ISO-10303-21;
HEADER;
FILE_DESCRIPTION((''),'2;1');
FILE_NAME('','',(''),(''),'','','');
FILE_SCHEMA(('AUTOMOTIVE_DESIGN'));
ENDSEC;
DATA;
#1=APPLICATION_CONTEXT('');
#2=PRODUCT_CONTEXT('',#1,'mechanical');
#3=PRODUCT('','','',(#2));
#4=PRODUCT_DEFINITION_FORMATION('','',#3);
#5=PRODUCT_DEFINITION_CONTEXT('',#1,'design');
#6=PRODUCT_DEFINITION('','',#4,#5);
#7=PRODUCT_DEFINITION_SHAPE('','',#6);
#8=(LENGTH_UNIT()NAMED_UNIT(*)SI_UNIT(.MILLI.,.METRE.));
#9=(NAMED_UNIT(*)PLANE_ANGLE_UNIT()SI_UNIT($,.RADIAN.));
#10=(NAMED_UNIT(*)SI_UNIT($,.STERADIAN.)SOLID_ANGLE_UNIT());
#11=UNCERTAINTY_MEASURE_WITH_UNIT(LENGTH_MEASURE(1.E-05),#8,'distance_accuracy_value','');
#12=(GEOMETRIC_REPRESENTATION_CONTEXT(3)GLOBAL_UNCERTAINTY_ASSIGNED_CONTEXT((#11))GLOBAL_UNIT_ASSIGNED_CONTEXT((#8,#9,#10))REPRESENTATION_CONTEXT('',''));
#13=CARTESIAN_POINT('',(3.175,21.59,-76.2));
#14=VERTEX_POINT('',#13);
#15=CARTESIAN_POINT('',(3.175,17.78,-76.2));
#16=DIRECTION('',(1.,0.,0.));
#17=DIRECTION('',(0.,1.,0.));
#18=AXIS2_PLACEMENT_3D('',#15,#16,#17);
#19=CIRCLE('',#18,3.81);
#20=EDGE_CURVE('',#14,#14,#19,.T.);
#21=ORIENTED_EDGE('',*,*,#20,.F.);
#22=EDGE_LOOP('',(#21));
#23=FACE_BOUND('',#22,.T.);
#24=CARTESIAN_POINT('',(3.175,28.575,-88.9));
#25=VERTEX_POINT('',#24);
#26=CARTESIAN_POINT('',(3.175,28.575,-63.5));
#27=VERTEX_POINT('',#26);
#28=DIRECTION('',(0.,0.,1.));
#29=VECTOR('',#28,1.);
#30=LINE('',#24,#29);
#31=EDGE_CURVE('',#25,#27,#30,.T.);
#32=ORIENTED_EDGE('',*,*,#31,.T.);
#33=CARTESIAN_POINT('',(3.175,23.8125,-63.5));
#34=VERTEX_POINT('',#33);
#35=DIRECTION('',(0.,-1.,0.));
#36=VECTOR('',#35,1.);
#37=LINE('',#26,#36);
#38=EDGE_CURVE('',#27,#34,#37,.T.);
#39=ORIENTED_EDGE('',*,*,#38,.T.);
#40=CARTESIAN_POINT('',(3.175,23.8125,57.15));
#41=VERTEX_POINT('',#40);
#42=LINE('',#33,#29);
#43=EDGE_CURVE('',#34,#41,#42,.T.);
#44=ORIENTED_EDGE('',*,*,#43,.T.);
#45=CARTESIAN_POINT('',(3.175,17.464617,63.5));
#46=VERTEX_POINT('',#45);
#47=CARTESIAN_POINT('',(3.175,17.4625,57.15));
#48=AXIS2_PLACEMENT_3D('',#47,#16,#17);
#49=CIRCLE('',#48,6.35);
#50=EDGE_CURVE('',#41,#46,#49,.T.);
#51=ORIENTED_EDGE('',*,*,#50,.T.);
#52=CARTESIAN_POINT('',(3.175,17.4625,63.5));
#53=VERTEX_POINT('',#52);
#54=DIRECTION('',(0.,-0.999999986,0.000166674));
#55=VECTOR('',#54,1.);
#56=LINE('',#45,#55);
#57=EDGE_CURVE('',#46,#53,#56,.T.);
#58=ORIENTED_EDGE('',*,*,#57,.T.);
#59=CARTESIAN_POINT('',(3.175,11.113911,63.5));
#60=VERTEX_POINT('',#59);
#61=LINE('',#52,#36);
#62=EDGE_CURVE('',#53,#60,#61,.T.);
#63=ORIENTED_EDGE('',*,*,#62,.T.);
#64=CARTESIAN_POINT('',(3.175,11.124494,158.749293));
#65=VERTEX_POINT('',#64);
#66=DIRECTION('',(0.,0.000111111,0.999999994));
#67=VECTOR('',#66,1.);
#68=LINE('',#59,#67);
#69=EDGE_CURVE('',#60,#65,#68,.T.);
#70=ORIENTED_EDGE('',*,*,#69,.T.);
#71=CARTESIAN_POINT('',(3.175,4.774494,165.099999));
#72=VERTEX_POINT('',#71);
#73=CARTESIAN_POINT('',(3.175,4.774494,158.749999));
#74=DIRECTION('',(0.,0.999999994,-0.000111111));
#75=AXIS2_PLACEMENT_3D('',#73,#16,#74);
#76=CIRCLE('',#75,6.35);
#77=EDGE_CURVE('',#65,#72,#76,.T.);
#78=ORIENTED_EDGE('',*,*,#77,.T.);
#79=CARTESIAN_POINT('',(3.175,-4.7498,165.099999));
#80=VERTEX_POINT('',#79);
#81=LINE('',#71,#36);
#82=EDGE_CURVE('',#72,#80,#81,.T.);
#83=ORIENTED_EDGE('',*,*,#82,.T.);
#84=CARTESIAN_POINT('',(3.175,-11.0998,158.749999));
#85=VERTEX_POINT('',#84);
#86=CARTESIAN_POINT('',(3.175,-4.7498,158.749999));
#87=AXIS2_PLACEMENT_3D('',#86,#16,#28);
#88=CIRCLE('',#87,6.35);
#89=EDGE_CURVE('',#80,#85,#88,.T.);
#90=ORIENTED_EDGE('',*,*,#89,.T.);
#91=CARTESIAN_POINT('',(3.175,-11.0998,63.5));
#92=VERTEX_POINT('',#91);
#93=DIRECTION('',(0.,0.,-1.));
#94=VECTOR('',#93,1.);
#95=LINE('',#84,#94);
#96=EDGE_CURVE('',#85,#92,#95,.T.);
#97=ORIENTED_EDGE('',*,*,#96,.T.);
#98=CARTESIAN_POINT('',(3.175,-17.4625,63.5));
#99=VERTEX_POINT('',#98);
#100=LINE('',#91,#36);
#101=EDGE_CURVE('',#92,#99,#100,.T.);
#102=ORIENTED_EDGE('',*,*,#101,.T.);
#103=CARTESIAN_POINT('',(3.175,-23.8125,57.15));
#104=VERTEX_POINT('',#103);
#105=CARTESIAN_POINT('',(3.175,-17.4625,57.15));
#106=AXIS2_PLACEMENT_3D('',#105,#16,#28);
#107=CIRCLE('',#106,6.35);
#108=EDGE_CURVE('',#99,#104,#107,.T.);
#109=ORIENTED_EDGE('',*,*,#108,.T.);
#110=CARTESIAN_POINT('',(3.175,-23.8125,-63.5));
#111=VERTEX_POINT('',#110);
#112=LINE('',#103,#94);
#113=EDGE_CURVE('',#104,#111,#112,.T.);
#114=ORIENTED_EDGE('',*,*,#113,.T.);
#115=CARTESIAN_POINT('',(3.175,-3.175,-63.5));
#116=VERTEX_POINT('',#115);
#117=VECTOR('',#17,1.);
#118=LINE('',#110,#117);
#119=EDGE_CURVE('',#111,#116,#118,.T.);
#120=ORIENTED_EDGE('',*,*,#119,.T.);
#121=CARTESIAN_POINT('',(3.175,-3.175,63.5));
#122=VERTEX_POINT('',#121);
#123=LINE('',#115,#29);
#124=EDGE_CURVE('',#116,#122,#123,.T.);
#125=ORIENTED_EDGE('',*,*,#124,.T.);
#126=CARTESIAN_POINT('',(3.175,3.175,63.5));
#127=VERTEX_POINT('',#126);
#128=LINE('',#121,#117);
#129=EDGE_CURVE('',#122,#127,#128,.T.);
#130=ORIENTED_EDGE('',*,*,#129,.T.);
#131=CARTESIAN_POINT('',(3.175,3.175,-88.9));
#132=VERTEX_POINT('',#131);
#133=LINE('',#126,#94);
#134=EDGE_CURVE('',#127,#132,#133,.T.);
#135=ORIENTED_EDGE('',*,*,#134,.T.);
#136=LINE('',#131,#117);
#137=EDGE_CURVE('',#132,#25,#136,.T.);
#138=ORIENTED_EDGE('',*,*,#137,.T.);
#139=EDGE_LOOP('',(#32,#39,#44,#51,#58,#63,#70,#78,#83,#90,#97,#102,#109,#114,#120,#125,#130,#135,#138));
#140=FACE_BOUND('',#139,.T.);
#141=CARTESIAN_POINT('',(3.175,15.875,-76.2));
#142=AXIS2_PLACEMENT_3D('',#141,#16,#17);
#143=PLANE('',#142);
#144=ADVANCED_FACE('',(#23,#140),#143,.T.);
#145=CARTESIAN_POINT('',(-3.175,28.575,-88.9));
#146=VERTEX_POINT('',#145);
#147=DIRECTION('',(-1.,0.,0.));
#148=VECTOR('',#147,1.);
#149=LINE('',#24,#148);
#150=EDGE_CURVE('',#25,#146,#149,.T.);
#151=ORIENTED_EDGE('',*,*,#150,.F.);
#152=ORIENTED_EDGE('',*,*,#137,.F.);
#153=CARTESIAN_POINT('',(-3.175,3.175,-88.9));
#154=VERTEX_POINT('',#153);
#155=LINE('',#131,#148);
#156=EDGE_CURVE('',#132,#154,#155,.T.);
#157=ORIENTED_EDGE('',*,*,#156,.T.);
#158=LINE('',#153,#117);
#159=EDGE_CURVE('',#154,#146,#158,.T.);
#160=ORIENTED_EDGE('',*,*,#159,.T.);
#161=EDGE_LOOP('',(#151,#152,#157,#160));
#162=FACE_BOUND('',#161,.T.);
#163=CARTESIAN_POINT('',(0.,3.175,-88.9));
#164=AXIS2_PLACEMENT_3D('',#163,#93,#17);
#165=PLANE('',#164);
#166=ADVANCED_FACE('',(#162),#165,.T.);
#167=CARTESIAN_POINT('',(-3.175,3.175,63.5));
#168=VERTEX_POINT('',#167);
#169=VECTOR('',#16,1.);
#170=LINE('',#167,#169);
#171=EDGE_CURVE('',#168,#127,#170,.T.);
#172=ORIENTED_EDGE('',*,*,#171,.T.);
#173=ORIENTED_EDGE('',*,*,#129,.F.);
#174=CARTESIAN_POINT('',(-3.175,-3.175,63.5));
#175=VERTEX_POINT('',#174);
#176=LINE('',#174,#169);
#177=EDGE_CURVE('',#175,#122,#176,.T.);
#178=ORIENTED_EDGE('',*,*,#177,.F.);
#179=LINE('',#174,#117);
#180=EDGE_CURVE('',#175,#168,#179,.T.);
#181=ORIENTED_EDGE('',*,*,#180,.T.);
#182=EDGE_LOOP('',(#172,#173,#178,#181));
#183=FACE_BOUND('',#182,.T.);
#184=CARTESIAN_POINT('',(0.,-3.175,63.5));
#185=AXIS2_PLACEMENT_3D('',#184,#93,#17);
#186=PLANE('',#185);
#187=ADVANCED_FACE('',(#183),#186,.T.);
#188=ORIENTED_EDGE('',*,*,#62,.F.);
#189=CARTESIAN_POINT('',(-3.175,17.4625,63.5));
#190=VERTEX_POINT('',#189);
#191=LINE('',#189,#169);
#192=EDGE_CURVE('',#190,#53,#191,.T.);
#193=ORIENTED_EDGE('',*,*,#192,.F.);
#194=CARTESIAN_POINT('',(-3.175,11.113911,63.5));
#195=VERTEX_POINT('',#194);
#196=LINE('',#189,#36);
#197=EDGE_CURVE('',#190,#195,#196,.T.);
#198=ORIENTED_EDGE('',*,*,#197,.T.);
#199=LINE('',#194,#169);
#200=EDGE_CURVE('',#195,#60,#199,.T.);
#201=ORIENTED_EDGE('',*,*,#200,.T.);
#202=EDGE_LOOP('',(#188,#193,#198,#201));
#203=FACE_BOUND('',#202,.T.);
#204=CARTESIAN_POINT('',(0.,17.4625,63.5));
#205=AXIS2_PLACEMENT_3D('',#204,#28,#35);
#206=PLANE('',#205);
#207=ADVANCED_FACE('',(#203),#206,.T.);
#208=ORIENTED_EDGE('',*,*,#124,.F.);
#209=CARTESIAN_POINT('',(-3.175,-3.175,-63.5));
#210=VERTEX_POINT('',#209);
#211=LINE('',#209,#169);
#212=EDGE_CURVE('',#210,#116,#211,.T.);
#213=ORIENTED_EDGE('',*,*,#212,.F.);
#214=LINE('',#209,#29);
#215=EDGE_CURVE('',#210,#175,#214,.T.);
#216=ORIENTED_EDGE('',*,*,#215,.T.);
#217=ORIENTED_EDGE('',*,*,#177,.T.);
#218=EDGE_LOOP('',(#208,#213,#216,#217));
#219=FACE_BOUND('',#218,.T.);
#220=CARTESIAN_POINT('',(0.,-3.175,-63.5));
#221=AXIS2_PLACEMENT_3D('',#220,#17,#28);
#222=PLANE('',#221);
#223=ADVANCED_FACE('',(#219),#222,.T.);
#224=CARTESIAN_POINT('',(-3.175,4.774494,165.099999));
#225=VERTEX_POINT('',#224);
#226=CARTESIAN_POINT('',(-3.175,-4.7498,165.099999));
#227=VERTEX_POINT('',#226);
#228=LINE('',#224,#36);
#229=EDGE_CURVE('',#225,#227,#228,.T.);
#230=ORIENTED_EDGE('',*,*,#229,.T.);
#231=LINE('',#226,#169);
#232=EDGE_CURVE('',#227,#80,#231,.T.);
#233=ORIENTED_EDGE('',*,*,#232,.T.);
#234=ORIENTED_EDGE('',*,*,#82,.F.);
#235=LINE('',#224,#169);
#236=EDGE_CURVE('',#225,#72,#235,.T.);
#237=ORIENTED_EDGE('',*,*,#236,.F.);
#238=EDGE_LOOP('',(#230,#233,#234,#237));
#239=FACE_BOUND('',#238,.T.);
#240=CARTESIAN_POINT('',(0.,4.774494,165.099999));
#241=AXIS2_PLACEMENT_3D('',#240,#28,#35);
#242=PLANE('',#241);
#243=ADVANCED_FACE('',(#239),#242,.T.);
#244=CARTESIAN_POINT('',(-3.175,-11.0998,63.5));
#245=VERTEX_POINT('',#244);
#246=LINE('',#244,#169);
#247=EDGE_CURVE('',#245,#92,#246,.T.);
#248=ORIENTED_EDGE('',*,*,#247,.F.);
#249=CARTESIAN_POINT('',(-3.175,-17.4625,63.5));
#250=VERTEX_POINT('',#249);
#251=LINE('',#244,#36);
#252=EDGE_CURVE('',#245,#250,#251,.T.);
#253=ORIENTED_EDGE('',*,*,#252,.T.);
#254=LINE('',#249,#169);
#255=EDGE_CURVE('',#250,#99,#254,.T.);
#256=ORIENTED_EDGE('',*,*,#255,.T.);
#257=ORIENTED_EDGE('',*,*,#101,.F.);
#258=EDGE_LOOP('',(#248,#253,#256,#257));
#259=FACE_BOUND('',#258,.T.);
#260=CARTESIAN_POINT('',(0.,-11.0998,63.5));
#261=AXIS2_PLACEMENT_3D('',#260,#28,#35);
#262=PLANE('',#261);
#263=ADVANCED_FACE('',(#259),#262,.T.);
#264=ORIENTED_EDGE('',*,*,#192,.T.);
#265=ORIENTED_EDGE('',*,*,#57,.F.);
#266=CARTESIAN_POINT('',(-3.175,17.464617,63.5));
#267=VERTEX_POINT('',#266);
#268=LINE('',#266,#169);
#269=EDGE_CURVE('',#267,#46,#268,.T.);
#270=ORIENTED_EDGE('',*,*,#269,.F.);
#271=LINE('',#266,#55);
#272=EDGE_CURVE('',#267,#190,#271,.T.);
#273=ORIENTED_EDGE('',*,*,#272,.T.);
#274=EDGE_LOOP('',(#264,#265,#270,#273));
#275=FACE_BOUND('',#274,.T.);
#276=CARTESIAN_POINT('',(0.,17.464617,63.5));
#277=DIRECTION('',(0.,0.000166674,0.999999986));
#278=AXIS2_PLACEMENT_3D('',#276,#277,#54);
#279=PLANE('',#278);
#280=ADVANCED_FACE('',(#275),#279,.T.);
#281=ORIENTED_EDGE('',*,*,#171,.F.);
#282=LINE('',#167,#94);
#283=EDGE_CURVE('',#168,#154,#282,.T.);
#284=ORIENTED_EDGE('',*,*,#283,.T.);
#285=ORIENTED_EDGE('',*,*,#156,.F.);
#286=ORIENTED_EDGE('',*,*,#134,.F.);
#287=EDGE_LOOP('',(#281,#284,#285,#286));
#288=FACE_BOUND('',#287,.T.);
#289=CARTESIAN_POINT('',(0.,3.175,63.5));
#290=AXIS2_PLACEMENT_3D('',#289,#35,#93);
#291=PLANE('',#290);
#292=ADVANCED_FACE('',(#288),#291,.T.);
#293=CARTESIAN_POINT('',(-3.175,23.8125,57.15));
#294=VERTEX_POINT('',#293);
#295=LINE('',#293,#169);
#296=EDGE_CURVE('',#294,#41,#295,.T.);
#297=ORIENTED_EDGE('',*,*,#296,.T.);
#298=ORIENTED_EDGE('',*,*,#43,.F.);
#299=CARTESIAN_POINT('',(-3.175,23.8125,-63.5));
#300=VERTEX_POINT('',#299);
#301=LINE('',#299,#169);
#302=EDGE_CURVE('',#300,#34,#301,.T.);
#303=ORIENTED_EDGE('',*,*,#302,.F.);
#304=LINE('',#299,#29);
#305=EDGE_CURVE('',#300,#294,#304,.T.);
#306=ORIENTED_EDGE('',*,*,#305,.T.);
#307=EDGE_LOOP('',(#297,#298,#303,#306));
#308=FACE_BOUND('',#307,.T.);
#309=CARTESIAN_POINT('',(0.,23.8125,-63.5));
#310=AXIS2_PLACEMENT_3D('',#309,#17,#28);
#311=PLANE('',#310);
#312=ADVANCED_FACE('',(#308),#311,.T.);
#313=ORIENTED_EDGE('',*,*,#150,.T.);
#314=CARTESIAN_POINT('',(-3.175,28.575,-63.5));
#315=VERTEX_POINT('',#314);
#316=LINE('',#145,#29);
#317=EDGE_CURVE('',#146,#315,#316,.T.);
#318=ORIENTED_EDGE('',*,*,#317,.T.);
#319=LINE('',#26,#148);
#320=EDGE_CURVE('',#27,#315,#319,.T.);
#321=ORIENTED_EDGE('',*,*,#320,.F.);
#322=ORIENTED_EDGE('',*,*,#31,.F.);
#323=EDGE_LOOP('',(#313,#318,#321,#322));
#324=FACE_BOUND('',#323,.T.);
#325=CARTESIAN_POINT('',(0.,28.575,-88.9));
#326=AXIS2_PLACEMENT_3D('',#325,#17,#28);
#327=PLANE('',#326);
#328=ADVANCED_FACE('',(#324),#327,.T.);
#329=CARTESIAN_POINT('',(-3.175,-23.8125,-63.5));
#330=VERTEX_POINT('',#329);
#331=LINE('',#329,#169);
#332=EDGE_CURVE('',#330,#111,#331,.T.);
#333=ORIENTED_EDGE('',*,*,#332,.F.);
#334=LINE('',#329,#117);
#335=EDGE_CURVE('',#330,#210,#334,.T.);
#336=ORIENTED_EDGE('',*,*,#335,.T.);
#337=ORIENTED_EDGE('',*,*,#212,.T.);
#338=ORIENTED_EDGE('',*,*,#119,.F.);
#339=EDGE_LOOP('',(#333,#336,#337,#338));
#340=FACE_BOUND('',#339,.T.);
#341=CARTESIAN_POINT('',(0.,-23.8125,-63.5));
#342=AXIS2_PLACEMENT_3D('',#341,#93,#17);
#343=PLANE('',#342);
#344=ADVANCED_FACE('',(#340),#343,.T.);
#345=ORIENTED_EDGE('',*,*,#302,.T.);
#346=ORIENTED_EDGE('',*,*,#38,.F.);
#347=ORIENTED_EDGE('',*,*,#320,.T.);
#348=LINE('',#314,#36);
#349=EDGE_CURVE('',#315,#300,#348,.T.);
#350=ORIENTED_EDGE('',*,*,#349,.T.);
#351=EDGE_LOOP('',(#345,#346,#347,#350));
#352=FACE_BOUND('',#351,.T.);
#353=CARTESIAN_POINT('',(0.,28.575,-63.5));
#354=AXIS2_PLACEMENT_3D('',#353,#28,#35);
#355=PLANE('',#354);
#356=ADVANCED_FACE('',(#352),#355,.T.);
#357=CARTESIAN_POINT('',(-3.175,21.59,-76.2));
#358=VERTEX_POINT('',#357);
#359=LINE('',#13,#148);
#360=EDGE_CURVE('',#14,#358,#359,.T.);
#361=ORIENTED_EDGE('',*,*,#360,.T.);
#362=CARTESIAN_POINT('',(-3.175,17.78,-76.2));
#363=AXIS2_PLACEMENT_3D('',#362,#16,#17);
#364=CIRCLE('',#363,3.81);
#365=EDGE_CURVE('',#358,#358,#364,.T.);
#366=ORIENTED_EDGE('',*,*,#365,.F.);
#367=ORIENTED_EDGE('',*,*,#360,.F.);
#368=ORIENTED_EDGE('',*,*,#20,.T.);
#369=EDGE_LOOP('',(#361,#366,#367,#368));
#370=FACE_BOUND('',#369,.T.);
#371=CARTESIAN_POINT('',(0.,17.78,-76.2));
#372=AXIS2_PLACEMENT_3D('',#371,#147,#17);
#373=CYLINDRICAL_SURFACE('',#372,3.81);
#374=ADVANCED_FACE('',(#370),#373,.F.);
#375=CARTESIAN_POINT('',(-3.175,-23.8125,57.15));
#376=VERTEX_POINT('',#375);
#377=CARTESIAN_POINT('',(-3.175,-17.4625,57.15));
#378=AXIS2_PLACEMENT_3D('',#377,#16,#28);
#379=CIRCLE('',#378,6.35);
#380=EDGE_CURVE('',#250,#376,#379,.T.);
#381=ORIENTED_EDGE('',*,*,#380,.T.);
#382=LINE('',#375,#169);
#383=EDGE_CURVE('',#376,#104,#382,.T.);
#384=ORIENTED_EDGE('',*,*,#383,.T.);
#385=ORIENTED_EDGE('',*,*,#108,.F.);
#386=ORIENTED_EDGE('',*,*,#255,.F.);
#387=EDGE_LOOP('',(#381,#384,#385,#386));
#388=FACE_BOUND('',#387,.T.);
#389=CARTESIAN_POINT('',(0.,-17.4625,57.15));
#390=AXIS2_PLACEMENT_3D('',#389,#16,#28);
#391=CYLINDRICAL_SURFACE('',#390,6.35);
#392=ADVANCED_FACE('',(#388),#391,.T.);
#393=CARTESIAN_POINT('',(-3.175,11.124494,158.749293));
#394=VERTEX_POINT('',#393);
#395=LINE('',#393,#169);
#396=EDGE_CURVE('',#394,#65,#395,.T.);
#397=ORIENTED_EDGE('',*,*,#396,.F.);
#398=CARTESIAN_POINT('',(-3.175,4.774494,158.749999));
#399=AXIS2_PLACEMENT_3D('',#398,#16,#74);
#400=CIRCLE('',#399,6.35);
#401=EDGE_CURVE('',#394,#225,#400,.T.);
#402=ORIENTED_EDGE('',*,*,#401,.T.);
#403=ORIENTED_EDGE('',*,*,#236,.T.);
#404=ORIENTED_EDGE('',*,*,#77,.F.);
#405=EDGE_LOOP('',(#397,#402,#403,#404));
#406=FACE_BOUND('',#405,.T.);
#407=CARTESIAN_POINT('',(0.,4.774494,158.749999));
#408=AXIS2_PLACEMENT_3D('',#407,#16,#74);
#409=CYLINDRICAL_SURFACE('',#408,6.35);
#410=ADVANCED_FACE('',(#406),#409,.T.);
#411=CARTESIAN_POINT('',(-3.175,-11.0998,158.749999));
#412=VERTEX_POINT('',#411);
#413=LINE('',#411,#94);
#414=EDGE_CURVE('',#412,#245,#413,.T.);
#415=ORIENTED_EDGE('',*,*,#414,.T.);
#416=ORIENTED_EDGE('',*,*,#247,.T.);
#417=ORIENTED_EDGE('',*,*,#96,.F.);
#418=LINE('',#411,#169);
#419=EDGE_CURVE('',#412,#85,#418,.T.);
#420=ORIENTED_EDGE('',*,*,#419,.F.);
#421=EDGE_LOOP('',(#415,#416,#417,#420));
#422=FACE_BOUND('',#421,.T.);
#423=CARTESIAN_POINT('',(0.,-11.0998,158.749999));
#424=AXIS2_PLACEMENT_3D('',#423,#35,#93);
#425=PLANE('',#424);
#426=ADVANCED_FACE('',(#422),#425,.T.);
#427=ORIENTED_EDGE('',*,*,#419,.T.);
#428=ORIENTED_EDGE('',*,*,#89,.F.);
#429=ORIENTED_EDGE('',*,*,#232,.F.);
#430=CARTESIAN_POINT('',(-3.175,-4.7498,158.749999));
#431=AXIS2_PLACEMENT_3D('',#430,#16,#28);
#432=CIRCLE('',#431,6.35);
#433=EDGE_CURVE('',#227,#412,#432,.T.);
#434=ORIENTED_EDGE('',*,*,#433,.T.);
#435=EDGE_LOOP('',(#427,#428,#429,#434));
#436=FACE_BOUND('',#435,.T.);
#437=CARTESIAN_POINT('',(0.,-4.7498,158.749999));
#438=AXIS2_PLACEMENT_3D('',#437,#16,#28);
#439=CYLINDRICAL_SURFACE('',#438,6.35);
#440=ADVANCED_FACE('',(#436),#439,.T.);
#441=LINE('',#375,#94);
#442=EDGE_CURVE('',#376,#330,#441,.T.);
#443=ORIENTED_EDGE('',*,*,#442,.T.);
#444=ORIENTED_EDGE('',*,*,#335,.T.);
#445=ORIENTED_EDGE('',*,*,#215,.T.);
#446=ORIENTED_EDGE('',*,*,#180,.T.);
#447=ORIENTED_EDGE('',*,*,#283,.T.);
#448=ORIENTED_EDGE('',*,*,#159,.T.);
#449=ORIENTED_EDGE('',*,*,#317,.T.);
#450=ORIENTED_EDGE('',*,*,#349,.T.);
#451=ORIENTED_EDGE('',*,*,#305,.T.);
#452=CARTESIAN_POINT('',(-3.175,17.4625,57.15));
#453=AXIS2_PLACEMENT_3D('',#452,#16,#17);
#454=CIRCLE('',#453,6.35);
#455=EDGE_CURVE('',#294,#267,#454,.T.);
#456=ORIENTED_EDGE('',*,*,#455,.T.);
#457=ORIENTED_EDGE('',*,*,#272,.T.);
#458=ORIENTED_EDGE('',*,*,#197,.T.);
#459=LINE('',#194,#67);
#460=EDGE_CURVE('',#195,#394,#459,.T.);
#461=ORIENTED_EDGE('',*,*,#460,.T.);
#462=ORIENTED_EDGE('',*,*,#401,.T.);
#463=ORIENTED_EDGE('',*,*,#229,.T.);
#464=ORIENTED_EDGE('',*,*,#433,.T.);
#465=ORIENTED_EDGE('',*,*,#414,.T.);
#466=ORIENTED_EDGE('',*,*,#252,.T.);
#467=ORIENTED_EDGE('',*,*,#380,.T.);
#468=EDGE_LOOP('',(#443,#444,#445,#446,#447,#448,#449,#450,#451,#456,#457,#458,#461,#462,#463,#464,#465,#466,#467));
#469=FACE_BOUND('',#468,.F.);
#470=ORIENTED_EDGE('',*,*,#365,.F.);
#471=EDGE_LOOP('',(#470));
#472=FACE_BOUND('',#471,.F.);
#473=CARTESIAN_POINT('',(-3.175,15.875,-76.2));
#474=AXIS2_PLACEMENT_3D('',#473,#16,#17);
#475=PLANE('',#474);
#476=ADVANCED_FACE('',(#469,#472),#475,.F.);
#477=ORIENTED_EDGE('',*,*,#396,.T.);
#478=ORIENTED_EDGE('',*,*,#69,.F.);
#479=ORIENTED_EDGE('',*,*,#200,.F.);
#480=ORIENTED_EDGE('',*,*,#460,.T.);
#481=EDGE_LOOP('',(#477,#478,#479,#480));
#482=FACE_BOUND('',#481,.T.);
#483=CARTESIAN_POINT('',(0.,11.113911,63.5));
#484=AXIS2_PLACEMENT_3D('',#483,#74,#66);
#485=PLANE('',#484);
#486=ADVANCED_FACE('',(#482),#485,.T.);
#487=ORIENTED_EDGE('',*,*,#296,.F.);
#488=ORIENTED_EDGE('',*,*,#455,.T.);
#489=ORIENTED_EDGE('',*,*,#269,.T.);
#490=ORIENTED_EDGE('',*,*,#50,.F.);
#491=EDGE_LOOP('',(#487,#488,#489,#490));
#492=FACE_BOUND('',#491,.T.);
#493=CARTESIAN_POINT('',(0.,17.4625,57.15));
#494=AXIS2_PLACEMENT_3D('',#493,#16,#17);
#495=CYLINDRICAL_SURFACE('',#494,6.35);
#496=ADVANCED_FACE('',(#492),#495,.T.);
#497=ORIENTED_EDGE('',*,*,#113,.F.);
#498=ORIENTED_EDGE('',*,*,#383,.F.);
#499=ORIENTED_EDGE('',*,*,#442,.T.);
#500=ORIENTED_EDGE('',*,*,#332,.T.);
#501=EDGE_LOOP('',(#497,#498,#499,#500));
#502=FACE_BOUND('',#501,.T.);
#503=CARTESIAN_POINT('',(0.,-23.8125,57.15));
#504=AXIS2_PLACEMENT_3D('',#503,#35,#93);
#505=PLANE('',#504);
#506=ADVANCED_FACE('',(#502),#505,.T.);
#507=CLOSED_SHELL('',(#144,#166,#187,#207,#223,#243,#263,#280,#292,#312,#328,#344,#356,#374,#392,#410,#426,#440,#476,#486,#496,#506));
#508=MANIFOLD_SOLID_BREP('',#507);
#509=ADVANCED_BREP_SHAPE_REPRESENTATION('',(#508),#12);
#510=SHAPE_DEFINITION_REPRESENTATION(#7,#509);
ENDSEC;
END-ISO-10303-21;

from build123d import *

# Parameters (mm, degrees)
F0_R     = 3.81
F1_DEPTH = 3.175


# Not quite as in the source:
# - ends of sketch curves that miss each other by under 0.0002 mm in the source are joined


with BuildPart() as f1:
    # F0 (on Right) → F1 (new body, symmetric)
    with BuildSketch(Plane.YZ):
        Polygon((28.575, -63.5), (23.8125, -63.5), (3.175, -63.5), (3.175, -88.9), (28.575, -88.9), align=None)
        with Locations((17.78, -76.2)):
            Circle(F0_R, mode=Mode.SUBTRACT)
        with BuildLine():
            Line((3.175, -63.5), (23.8125, -63.5))
            Line((23.8125, -63.5), (23.8125, 57.15))
            ThreePointArc((23.8125, 57.15), (21.9533763667, 61.6393796296), (17.4646167058, 63.4999996472))
            Line((17.4646167058, 63.4999996472), (17.4625, 63.5))
            Line((17.4625, 63.5), (11.1139111112, 63.5))
            Line((11.1139111112, 63.5), (11.124494366, 158.7492930333))
            ThreePointArc((11.124494366, 158.7492930333), (9.2648719104, 163.2398771909), (4.7744944052, 165.0999985889))
            Line((4.7744944052, 165.0999985889), (-4.7498, 165.0999985889))
            ThreePointArc((-4.7498, 165.0999985889), (-9.2399280605, 163.2401266494), (-11.0998, 158.7499985889))
            Line((-11.0998, 158.7499985889), (-11.0998, 63.5))
            Line((-11.0998, 63.5), (-17.4498, 63.5))
            Line((-17.4498, 63.5), (-17.4625, 63.5))
            ThreePointArc((-17.4625, 63.5), (-21.9526280605, 61.6401280605), (-23.8125, 57.15))
            Line((-23.8125, 57.15), (-23.8125, -63.5))
            Line((-23.8125, -63.5), (-3.175, -63.5))
            Line((-3.175, -63.5), (-3.175, 63.5))
            Line((-3.175, 63.5), (3.175, 63.5))
            Line((3.175, 63.5), (3.175, -63.5))
        make_face()
    extrude(amount=F1_DEPTH, both=True)


solid = f1.part
